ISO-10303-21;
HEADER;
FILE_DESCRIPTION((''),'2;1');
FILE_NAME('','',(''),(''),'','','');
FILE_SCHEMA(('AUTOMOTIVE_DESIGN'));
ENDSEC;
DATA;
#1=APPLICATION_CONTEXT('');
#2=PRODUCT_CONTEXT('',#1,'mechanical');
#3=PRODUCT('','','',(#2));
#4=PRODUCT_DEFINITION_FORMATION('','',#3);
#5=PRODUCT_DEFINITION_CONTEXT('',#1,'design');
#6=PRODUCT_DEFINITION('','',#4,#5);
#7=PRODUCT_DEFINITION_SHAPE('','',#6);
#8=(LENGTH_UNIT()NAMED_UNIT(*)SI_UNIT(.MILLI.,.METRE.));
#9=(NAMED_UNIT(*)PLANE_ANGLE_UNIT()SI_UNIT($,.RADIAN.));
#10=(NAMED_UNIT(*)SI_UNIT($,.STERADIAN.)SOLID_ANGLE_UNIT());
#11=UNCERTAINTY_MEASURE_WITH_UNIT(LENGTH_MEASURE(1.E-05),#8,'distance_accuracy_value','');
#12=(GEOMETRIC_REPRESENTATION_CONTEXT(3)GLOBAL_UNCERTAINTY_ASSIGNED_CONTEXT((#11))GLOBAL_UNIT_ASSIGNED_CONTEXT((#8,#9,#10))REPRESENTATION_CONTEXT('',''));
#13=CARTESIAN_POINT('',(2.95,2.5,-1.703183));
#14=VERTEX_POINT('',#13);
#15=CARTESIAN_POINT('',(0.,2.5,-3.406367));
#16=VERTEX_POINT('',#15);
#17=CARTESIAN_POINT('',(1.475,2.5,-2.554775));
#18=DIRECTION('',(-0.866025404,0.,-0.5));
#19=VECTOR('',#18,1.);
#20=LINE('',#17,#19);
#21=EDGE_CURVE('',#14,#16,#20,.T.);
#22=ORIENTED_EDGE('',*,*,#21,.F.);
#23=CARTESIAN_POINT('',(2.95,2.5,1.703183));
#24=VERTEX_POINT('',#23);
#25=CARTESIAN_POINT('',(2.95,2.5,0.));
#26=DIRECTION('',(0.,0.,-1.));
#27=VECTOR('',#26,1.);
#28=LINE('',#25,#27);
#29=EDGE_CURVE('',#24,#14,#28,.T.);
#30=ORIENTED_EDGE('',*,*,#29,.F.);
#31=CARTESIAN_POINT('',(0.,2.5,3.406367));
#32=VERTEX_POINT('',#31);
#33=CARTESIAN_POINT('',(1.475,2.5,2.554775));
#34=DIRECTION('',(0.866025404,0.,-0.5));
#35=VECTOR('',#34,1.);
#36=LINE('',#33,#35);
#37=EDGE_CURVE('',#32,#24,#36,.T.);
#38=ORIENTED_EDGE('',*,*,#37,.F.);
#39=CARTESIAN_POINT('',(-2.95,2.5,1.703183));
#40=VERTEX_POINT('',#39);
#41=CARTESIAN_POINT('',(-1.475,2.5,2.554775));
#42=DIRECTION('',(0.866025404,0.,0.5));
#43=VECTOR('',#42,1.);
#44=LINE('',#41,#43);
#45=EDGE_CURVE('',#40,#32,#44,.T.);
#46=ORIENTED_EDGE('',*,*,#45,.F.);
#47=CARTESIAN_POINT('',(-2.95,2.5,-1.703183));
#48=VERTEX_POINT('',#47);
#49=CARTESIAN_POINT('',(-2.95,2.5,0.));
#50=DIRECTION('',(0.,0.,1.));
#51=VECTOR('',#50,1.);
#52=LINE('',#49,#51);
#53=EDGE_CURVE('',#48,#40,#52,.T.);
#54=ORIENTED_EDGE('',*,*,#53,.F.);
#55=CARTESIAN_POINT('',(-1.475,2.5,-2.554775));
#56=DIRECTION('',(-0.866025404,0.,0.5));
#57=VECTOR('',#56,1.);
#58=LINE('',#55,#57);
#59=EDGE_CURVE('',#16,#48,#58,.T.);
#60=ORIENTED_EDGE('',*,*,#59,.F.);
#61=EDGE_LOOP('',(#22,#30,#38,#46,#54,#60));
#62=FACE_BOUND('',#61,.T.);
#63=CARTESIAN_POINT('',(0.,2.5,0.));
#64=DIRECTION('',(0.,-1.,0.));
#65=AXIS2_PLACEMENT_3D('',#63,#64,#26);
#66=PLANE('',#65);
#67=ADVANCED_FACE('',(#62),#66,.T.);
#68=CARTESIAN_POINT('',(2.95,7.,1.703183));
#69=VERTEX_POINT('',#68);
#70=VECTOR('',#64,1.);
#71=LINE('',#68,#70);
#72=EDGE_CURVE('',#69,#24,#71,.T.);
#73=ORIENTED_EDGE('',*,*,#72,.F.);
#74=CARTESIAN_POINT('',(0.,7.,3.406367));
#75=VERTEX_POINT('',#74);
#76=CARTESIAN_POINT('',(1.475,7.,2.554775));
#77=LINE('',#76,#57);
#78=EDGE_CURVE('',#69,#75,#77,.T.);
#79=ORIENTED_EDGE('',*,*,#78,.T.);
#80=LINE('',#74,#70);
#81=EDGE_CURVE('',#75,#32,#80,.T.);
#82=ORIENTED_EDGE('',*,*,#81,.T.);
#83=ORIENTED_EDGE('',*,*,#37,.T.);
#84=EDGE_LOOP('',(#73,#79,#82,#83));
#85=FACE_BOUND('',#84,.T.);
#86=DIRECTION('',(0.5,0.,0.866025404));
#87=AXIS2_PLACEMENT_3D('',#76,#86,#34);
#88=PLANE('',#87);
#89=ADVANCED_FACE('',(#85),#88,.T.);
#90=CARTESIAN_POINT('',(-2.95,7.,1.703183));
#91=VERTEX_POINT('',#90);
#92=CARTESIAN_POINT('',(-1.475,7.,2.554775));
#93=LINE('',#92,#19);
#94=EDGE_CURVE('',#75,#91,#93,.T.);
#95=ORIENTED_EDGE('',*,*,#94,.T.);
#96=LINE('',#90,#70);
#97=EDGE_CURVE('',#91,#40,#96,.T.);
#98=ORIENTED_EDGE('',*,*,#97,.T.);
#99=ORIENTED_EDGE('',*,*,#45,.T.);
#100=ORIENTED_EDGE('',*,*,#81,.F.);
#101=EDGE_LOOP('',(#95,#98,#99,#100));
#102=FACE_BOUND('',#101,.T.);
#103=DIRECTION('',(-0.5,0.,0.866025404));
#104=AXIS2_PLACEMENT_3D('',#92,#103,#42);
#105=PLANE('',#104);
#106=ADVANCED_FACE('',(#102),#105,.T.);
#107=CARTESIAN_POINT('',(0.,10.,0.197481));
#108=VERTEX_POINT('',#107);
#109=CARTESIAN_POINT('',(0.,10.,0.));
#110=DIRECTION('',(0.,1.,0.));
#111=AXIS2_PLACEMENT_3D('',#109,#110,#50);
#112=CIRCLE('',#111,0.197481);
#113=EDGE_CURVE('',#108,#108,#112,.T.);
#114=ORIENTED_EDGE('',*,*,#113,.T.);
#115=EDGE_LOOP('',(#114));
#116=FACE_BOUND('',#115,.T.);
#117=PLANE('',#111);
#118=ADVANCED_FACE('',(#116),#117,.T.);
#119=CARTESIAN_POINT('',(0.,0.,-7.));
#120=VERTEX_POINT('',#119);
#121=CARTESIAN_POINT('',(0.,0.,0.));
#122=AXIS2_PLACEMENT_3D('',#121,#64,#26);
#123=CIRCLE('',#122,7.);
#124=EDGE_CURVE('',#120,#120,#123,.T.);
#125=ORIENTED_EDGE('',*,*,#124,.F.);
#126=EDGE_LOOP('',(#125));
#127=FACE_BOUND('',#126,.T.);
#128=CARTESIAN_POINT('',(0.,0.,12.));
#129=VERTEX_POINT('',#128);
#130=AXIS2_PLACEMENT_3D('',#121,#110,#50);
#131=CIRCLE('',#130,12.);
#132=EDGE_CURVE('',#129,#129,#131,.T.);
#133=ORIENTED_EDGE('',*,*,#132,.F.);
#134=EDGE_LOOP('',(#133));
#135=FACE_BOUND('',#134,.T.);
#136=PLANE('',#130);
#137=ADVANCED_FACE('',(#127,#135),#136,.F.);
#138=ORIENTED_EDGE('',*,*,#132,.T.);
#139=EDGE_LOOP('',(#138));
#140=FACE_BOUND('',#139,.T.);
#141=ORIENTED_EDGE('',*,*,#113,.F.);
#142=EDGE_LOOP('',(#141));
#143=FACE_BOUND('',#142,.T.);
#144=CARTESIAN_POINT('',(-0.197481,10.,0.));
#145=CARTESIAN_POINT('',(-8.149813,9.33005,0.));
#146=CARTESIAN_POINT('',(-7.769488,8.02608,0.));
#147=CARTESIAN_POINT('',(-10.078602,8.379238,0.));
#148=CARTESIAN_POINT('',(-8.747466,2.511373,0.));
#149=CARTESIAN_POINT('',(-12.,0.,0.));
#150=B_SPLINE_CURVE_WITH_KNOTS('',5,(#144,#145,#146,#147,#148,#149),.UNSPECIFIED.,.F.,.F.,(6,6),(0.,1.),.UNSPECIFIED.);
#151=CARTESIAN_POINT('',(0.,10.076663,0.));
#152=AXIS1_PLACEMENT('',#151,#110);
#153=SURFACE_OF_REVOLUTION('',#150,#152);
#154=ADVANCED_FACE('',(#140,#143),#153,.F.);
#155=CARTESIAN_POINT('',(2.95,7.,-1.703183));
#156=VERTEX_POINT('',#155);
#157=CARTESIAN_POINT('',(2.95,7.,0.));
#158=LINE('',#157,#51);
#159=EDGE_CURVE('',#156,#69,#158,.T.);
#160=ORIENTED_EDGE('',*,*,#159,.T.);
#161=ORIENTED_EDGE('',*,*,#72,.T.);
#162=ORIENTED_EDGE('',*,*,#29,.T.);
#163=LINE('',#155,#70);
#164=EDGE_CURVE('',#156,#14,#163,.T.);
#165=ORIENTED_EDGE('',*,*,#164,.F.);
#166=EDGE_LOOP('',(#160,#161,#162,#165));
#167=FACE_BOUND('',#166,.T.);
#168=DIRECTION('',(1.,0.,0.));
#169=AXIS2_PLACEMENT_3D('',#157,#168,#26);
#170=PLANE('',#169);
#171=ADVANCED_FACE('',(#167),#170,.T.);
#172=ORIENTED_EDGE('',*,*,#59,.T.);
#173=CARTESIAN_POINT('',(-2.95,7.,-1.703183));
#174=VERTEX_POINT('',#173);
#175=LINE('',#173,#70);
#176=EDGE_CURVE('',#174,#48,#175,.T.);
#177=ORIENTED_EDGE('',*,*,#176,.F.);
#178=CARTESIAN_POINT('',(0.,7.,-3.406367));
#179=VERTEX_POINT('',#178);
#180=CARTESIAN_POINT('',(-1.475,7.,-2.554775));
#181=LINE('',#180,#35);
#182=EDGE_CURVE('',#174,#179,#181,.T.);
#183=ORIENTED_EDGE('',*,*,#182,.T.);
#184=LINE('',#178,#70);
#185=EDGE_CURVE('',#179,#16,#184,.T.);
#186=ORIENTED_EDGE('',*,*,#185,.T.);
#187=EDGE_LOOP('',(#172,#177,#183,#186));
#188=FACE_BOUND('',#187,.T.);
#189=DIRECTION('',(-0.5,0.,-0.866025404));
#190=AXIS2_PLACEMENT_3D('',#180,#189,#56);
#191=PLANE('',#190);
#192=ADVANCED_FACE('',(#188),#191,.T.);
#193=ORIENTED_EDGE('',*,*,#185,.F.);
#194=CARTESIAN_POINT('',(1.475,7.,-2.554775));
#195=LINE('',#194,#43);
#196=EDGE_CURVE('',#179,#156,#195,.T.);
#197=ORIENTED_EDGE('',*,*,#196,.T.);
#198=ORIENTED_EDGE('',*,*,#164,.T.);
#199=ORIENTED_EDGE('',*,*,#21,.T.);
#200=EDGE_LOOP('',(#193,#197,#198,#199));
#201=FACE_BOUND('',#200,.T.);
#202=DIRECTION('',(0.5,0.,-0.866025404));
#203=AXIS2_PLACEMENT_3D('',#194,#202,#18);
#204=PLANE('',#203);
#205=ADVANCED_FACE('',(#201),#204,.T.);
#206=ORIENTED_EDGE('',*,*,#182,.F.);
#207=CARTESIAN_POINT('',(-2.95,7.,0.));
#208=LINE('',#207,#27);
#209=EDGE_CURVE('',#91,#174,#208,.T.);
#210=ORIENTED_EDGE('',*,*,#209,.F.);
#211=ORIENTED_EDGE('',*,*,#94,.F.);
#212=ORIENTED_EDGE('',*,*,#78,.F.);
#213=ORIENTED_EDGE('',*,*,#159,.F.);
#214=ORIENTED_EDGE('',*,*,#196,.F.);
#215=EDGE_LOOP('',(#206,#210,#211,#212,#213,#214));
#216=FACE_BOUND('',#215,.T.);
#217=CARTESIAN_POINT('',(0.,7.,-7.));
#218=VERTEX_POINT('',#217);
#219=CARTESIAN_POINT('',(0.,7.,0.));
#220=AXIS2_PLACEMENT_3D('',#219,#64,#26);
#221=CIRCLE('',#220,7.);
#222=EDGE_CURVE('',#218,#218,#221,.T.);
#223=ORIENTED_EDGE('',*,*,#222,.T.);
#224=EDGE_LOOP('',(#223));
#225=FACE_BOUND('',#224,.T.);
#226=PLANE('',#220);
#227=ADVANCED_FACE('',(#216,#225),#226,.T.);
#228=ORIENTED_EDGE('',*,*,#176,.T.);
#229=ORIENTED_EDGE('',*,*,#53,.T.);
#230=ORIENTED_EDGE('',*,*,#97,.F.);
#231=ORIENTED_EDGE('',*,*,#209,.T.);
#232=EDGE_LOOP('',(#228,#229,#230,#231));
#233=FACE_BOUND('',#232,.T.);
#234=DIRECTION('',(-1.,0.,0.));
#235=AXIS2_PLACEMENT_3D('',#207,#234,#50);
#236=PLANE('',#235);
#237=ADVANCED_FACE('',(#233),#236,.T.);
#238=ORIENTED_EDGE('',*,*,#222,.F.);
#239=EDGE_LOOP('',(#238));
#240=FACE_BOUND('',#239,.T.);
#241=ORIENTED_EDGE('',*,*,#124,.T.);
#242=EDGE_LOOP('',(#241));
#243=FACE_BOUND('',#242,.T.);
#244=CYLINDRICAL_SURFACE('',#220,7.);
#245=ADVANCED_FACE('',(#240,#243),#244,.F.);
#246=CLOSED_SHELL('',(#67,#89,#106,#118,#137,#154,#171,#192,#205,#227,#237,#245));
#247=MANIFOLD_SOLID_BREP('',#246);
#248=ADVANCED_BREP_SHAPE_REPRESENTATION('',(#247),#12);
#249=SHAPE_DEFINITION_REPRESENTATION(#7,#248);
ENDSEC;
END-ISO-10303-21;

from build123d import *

# Parameters (mm, degrees)
SKETCH1_R           = 12
BOSS_EXTRUDE1_DEPTH = 10
SKETCH2_R           = 7
CUT_EXTRUDE1_DEPTH  = 7
SKETCH3_R           = 4.558249482
CUT_EXTRUDE2_DEPTH  = 2.5


# Read off the part's stored shape, not the designer's step: Cut-Revolve7
with BuildPart() as part:
    # Sketch1 → Boss-Extrude1 (new body)
    with BuildSketch(Plane(origin=(0, 0, 0), x_dir=(1, 0, 0), z_dir=(0, 1, 0))):
        with Locations(Location((0, 0, 0), (0, 0, 270))):
            Circle(SKETCH1_R)
    extrude(amount=BOSS_EXTRUDE1_DEPTH)

    # Sketch2 → Cut-Extrude1 (cut)
    with BuildSketch(Plane.XZ):
        with Locations(Location((0, 0, 0), (0, 0, 270))):
            Circle(SKETCH2_R)
        Polygon((2.95, -1.703183294), (2.95, 1.703183294), (0, 3.406366588), (-2.95, 1.703183294), (-2.95, -1.703183294), (0, -3.406366588), align=None, mode=Mode.SUBTRACT)
    extrude(amount=-CUT_EXTRUDE1_DEPTH, mode=Mode.SUBTRACT)

    # Sketch3 → Cut-Extrude2 (cut)
    with BuildSketch(Plane.XZ):
        Circle(SKETCH3_R)
    extrude(amount=-CUT_EXTRUDE2_DEPTH, mode=Mode.SUBTRACT)

    # Cut-Revolve7 outline → Cut-Revolve7 (revolve, cut)
    with BuildSketch(Plane.XY):
        with BuildLine():
            Line((12, 10), (0.197481425, 10))
            add(Edge.make_bspline(
                [(0.197481425, 10), (8.149812734, 9.330049938), (7.76948814, 8.0260799), (10.078601748, 8.379238452), (8.747465668, 2.511373283), (12, 0)],
                knots=[0, 0, 0, 0, 0, 0, 1, 1, 1, 1, 1, 1], degree=5))
            Line((12, 0), (12, 10))
        make_face()
    revolve(axis=Axis((0, 0, 0), (0, 1, 0)), mode=Mode.SUBTRACT)


solid = part.part
